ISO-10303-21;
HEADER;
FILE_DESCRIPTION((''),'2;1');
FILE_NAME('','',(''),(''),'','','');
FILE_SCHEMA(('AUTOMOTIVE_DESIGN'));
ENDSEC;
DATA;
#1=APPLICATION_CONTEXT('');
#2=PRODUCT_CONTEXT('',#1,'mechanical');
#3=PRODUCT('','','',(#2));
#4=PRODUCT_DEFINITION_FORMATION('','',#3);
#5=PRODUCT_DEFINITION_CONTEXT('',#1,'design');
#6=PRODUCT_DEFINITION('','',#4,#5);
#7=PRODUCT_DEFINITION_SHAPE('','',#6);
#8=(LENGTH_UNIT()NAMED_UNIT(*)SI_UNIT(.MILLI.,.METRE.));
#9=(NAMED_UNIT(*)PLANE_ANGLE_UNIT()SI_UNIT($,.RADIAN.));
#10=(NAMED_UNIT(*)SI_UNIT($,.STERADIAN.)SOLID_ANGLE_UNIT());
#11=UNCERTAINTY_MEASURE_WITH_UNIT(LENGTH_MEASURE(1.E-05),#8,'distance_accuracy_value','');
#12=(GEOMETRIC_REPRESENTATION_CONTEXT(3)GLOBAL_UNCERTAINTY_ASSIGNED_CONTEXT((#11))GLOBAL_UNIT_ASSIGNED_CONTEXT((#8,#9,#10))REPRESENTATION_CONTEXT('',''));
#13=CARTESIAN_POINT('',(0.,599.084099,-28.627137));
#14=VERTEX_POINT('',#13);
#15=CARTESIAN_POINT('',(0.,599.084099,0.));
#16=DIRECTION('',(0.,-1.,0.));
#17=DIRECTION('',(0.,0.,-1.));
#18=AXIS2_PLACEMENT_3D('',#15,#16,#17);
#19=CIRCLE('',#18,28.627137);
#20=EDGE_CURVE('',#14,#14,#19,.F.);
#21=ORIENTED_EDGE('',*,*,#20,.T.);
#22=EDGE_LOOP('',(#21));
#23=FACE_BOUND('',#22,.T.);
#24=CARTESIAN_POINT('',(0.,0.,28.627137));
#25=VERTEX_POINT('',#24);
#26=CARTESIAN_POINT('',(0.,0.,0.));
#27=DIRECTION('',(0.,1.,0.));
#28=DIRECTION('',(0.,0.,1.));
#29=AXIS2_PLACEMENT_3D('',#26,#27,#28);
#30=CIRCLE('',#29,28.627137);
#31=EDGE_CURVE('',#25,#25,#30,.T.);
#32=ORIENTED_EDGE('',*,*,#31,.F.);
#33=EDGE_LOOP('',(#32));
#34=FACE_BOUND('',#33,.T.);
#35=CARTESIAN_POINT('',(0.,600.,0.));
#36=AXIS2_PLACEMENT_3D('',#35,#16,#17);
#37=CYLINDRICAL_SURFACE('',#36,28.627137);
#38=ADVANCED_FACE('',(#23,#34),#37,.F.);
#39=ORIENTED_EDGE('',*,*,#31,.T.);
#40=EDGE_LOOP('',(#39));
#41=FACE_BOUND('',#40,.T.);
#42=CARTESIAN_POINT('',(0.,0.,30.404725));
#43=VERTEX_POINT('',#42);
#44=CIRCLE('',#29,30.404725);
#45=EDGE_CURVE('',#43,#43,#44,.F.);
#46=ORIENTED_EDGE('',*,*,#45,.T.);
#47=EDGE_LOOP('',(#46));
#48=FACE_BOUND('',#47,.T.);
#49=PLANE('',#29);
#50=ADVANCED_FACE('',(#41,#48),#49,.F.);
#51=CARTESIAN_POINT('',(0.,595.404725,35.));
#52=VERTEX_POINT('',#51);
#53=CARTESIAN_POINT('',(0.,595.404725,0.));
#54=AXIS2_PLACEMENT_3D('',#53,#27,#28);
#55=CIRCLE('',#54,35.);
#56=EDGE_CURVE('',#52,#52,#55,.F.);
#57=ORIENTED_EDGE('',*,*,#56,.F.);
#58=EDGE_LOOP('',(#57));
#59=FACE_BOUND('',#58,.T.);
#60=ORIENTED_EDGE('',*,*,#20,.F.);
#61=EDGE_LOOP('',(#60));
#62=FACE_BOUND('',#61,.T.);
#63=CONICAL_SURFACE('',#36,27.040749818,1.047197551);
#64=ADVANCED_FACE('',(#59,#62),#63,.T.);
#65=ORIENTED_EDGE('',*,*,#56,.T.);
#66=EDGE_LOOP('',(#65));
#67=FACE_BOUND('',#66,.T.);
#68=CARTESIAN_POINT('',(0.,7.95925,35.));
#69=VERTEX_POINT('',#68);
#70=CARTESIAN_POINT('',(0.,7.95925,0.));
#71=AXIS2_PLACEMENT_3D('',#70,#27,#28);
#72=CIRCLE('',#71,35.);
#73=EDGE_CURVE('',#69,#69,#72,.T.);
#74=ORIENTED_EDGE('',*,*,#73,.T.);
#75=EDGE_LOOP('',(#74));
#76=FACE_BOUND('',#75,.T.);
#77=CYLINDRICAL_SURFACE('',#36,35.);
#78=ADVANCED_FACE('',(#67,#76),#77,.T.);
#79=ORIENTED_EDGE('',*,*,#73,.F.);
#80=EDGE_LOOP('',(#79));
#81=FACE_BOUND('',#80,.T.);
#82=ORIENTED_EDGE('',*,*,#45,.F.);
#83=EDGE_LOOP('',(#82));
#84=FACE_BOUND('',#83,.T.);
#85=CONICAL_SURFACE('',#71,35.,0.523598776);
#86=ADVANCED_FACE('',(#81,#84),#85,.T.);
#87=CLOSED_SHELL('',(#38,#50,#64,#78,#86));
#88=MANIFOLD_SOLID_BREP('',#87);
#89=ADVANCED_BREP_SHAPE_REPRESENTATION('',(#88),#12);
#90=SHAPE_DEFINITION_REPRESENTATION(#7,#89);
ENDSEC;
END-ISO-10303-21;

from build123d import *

# Parameters (mm, degrees)
SKETCH1_R           = 35
BOSS_EXTRUDE1_DEPTH = 600
SKETCH2_R           = 28.627137147
CUT_EXTRUDE1_DEPTH  = 603.038204768
CHAMFER1_SIZE       = 4.595275
CHAMFER1_SIZE_2     = 7.95925


with BuildPart() as part:
    # Sketch1 → Boss-Extrude1 (new body)
    with BuildSketch(Plane(origin=(0, 0, 0), x_dir=(1, 0, 0), z_dir=(0, 1, 0))):
        with Locations(Location((0, 0, 0), (0, 0, 270))):
            Circle(SKETCH1_R)
    extrude(amount=BOSS_EXTRUDE1_DEPTH)

    # Sketch2 → Cut-Extrude1 (cut, through all)
    with BuildSketch(Plane(origin=(0, 0, 0), x_dir=(1, 0, 0), z_dir=(0, 1, 0))):
        with Locations(Location((0, 0, 0), (0, 0, 270))):
            Circle(SKETCH2_R)
    extrude(amount=CUT_EXTRUDE1_DEPTH, mode=Mode.SUBTRACT)

    # Chamfer1
    # the kernel refuses this chamfer: 7.95925, 4.595275 mm, written as the material it takes off along each edge
    with BuildSketch(Plane(origin=(0, 600, 0), x_dir=(0, 0, 1), z_dir=(-1, 0, 0))) as chamfer1_piece_1:
        Polygon((35, -CHAMFER1_SIZE), (35 - CHAMFER1_SIZE_2, 0), (35, 0), align=None)
    revolve(axis=Axis((0, 600, 0), (0, 1, 0)), mode=Mode.SUBTRACT)
    with BuildSketch(Plane(origin=(0, 0, 0), x_dir=(0, 0, 1), z_dir=(-1, 0, 0))) as chamfer1_piece_2:
        Polygon((35, CHAMFER1_SIZE_2), (35 - CHAMFER1_SIZE, 0), (35, 0), align=None)
    revolve(axis=Axis((0, 0, 0), (0, 1, 0)), mode=Mode.SUBTRACT)


solid = part.part
